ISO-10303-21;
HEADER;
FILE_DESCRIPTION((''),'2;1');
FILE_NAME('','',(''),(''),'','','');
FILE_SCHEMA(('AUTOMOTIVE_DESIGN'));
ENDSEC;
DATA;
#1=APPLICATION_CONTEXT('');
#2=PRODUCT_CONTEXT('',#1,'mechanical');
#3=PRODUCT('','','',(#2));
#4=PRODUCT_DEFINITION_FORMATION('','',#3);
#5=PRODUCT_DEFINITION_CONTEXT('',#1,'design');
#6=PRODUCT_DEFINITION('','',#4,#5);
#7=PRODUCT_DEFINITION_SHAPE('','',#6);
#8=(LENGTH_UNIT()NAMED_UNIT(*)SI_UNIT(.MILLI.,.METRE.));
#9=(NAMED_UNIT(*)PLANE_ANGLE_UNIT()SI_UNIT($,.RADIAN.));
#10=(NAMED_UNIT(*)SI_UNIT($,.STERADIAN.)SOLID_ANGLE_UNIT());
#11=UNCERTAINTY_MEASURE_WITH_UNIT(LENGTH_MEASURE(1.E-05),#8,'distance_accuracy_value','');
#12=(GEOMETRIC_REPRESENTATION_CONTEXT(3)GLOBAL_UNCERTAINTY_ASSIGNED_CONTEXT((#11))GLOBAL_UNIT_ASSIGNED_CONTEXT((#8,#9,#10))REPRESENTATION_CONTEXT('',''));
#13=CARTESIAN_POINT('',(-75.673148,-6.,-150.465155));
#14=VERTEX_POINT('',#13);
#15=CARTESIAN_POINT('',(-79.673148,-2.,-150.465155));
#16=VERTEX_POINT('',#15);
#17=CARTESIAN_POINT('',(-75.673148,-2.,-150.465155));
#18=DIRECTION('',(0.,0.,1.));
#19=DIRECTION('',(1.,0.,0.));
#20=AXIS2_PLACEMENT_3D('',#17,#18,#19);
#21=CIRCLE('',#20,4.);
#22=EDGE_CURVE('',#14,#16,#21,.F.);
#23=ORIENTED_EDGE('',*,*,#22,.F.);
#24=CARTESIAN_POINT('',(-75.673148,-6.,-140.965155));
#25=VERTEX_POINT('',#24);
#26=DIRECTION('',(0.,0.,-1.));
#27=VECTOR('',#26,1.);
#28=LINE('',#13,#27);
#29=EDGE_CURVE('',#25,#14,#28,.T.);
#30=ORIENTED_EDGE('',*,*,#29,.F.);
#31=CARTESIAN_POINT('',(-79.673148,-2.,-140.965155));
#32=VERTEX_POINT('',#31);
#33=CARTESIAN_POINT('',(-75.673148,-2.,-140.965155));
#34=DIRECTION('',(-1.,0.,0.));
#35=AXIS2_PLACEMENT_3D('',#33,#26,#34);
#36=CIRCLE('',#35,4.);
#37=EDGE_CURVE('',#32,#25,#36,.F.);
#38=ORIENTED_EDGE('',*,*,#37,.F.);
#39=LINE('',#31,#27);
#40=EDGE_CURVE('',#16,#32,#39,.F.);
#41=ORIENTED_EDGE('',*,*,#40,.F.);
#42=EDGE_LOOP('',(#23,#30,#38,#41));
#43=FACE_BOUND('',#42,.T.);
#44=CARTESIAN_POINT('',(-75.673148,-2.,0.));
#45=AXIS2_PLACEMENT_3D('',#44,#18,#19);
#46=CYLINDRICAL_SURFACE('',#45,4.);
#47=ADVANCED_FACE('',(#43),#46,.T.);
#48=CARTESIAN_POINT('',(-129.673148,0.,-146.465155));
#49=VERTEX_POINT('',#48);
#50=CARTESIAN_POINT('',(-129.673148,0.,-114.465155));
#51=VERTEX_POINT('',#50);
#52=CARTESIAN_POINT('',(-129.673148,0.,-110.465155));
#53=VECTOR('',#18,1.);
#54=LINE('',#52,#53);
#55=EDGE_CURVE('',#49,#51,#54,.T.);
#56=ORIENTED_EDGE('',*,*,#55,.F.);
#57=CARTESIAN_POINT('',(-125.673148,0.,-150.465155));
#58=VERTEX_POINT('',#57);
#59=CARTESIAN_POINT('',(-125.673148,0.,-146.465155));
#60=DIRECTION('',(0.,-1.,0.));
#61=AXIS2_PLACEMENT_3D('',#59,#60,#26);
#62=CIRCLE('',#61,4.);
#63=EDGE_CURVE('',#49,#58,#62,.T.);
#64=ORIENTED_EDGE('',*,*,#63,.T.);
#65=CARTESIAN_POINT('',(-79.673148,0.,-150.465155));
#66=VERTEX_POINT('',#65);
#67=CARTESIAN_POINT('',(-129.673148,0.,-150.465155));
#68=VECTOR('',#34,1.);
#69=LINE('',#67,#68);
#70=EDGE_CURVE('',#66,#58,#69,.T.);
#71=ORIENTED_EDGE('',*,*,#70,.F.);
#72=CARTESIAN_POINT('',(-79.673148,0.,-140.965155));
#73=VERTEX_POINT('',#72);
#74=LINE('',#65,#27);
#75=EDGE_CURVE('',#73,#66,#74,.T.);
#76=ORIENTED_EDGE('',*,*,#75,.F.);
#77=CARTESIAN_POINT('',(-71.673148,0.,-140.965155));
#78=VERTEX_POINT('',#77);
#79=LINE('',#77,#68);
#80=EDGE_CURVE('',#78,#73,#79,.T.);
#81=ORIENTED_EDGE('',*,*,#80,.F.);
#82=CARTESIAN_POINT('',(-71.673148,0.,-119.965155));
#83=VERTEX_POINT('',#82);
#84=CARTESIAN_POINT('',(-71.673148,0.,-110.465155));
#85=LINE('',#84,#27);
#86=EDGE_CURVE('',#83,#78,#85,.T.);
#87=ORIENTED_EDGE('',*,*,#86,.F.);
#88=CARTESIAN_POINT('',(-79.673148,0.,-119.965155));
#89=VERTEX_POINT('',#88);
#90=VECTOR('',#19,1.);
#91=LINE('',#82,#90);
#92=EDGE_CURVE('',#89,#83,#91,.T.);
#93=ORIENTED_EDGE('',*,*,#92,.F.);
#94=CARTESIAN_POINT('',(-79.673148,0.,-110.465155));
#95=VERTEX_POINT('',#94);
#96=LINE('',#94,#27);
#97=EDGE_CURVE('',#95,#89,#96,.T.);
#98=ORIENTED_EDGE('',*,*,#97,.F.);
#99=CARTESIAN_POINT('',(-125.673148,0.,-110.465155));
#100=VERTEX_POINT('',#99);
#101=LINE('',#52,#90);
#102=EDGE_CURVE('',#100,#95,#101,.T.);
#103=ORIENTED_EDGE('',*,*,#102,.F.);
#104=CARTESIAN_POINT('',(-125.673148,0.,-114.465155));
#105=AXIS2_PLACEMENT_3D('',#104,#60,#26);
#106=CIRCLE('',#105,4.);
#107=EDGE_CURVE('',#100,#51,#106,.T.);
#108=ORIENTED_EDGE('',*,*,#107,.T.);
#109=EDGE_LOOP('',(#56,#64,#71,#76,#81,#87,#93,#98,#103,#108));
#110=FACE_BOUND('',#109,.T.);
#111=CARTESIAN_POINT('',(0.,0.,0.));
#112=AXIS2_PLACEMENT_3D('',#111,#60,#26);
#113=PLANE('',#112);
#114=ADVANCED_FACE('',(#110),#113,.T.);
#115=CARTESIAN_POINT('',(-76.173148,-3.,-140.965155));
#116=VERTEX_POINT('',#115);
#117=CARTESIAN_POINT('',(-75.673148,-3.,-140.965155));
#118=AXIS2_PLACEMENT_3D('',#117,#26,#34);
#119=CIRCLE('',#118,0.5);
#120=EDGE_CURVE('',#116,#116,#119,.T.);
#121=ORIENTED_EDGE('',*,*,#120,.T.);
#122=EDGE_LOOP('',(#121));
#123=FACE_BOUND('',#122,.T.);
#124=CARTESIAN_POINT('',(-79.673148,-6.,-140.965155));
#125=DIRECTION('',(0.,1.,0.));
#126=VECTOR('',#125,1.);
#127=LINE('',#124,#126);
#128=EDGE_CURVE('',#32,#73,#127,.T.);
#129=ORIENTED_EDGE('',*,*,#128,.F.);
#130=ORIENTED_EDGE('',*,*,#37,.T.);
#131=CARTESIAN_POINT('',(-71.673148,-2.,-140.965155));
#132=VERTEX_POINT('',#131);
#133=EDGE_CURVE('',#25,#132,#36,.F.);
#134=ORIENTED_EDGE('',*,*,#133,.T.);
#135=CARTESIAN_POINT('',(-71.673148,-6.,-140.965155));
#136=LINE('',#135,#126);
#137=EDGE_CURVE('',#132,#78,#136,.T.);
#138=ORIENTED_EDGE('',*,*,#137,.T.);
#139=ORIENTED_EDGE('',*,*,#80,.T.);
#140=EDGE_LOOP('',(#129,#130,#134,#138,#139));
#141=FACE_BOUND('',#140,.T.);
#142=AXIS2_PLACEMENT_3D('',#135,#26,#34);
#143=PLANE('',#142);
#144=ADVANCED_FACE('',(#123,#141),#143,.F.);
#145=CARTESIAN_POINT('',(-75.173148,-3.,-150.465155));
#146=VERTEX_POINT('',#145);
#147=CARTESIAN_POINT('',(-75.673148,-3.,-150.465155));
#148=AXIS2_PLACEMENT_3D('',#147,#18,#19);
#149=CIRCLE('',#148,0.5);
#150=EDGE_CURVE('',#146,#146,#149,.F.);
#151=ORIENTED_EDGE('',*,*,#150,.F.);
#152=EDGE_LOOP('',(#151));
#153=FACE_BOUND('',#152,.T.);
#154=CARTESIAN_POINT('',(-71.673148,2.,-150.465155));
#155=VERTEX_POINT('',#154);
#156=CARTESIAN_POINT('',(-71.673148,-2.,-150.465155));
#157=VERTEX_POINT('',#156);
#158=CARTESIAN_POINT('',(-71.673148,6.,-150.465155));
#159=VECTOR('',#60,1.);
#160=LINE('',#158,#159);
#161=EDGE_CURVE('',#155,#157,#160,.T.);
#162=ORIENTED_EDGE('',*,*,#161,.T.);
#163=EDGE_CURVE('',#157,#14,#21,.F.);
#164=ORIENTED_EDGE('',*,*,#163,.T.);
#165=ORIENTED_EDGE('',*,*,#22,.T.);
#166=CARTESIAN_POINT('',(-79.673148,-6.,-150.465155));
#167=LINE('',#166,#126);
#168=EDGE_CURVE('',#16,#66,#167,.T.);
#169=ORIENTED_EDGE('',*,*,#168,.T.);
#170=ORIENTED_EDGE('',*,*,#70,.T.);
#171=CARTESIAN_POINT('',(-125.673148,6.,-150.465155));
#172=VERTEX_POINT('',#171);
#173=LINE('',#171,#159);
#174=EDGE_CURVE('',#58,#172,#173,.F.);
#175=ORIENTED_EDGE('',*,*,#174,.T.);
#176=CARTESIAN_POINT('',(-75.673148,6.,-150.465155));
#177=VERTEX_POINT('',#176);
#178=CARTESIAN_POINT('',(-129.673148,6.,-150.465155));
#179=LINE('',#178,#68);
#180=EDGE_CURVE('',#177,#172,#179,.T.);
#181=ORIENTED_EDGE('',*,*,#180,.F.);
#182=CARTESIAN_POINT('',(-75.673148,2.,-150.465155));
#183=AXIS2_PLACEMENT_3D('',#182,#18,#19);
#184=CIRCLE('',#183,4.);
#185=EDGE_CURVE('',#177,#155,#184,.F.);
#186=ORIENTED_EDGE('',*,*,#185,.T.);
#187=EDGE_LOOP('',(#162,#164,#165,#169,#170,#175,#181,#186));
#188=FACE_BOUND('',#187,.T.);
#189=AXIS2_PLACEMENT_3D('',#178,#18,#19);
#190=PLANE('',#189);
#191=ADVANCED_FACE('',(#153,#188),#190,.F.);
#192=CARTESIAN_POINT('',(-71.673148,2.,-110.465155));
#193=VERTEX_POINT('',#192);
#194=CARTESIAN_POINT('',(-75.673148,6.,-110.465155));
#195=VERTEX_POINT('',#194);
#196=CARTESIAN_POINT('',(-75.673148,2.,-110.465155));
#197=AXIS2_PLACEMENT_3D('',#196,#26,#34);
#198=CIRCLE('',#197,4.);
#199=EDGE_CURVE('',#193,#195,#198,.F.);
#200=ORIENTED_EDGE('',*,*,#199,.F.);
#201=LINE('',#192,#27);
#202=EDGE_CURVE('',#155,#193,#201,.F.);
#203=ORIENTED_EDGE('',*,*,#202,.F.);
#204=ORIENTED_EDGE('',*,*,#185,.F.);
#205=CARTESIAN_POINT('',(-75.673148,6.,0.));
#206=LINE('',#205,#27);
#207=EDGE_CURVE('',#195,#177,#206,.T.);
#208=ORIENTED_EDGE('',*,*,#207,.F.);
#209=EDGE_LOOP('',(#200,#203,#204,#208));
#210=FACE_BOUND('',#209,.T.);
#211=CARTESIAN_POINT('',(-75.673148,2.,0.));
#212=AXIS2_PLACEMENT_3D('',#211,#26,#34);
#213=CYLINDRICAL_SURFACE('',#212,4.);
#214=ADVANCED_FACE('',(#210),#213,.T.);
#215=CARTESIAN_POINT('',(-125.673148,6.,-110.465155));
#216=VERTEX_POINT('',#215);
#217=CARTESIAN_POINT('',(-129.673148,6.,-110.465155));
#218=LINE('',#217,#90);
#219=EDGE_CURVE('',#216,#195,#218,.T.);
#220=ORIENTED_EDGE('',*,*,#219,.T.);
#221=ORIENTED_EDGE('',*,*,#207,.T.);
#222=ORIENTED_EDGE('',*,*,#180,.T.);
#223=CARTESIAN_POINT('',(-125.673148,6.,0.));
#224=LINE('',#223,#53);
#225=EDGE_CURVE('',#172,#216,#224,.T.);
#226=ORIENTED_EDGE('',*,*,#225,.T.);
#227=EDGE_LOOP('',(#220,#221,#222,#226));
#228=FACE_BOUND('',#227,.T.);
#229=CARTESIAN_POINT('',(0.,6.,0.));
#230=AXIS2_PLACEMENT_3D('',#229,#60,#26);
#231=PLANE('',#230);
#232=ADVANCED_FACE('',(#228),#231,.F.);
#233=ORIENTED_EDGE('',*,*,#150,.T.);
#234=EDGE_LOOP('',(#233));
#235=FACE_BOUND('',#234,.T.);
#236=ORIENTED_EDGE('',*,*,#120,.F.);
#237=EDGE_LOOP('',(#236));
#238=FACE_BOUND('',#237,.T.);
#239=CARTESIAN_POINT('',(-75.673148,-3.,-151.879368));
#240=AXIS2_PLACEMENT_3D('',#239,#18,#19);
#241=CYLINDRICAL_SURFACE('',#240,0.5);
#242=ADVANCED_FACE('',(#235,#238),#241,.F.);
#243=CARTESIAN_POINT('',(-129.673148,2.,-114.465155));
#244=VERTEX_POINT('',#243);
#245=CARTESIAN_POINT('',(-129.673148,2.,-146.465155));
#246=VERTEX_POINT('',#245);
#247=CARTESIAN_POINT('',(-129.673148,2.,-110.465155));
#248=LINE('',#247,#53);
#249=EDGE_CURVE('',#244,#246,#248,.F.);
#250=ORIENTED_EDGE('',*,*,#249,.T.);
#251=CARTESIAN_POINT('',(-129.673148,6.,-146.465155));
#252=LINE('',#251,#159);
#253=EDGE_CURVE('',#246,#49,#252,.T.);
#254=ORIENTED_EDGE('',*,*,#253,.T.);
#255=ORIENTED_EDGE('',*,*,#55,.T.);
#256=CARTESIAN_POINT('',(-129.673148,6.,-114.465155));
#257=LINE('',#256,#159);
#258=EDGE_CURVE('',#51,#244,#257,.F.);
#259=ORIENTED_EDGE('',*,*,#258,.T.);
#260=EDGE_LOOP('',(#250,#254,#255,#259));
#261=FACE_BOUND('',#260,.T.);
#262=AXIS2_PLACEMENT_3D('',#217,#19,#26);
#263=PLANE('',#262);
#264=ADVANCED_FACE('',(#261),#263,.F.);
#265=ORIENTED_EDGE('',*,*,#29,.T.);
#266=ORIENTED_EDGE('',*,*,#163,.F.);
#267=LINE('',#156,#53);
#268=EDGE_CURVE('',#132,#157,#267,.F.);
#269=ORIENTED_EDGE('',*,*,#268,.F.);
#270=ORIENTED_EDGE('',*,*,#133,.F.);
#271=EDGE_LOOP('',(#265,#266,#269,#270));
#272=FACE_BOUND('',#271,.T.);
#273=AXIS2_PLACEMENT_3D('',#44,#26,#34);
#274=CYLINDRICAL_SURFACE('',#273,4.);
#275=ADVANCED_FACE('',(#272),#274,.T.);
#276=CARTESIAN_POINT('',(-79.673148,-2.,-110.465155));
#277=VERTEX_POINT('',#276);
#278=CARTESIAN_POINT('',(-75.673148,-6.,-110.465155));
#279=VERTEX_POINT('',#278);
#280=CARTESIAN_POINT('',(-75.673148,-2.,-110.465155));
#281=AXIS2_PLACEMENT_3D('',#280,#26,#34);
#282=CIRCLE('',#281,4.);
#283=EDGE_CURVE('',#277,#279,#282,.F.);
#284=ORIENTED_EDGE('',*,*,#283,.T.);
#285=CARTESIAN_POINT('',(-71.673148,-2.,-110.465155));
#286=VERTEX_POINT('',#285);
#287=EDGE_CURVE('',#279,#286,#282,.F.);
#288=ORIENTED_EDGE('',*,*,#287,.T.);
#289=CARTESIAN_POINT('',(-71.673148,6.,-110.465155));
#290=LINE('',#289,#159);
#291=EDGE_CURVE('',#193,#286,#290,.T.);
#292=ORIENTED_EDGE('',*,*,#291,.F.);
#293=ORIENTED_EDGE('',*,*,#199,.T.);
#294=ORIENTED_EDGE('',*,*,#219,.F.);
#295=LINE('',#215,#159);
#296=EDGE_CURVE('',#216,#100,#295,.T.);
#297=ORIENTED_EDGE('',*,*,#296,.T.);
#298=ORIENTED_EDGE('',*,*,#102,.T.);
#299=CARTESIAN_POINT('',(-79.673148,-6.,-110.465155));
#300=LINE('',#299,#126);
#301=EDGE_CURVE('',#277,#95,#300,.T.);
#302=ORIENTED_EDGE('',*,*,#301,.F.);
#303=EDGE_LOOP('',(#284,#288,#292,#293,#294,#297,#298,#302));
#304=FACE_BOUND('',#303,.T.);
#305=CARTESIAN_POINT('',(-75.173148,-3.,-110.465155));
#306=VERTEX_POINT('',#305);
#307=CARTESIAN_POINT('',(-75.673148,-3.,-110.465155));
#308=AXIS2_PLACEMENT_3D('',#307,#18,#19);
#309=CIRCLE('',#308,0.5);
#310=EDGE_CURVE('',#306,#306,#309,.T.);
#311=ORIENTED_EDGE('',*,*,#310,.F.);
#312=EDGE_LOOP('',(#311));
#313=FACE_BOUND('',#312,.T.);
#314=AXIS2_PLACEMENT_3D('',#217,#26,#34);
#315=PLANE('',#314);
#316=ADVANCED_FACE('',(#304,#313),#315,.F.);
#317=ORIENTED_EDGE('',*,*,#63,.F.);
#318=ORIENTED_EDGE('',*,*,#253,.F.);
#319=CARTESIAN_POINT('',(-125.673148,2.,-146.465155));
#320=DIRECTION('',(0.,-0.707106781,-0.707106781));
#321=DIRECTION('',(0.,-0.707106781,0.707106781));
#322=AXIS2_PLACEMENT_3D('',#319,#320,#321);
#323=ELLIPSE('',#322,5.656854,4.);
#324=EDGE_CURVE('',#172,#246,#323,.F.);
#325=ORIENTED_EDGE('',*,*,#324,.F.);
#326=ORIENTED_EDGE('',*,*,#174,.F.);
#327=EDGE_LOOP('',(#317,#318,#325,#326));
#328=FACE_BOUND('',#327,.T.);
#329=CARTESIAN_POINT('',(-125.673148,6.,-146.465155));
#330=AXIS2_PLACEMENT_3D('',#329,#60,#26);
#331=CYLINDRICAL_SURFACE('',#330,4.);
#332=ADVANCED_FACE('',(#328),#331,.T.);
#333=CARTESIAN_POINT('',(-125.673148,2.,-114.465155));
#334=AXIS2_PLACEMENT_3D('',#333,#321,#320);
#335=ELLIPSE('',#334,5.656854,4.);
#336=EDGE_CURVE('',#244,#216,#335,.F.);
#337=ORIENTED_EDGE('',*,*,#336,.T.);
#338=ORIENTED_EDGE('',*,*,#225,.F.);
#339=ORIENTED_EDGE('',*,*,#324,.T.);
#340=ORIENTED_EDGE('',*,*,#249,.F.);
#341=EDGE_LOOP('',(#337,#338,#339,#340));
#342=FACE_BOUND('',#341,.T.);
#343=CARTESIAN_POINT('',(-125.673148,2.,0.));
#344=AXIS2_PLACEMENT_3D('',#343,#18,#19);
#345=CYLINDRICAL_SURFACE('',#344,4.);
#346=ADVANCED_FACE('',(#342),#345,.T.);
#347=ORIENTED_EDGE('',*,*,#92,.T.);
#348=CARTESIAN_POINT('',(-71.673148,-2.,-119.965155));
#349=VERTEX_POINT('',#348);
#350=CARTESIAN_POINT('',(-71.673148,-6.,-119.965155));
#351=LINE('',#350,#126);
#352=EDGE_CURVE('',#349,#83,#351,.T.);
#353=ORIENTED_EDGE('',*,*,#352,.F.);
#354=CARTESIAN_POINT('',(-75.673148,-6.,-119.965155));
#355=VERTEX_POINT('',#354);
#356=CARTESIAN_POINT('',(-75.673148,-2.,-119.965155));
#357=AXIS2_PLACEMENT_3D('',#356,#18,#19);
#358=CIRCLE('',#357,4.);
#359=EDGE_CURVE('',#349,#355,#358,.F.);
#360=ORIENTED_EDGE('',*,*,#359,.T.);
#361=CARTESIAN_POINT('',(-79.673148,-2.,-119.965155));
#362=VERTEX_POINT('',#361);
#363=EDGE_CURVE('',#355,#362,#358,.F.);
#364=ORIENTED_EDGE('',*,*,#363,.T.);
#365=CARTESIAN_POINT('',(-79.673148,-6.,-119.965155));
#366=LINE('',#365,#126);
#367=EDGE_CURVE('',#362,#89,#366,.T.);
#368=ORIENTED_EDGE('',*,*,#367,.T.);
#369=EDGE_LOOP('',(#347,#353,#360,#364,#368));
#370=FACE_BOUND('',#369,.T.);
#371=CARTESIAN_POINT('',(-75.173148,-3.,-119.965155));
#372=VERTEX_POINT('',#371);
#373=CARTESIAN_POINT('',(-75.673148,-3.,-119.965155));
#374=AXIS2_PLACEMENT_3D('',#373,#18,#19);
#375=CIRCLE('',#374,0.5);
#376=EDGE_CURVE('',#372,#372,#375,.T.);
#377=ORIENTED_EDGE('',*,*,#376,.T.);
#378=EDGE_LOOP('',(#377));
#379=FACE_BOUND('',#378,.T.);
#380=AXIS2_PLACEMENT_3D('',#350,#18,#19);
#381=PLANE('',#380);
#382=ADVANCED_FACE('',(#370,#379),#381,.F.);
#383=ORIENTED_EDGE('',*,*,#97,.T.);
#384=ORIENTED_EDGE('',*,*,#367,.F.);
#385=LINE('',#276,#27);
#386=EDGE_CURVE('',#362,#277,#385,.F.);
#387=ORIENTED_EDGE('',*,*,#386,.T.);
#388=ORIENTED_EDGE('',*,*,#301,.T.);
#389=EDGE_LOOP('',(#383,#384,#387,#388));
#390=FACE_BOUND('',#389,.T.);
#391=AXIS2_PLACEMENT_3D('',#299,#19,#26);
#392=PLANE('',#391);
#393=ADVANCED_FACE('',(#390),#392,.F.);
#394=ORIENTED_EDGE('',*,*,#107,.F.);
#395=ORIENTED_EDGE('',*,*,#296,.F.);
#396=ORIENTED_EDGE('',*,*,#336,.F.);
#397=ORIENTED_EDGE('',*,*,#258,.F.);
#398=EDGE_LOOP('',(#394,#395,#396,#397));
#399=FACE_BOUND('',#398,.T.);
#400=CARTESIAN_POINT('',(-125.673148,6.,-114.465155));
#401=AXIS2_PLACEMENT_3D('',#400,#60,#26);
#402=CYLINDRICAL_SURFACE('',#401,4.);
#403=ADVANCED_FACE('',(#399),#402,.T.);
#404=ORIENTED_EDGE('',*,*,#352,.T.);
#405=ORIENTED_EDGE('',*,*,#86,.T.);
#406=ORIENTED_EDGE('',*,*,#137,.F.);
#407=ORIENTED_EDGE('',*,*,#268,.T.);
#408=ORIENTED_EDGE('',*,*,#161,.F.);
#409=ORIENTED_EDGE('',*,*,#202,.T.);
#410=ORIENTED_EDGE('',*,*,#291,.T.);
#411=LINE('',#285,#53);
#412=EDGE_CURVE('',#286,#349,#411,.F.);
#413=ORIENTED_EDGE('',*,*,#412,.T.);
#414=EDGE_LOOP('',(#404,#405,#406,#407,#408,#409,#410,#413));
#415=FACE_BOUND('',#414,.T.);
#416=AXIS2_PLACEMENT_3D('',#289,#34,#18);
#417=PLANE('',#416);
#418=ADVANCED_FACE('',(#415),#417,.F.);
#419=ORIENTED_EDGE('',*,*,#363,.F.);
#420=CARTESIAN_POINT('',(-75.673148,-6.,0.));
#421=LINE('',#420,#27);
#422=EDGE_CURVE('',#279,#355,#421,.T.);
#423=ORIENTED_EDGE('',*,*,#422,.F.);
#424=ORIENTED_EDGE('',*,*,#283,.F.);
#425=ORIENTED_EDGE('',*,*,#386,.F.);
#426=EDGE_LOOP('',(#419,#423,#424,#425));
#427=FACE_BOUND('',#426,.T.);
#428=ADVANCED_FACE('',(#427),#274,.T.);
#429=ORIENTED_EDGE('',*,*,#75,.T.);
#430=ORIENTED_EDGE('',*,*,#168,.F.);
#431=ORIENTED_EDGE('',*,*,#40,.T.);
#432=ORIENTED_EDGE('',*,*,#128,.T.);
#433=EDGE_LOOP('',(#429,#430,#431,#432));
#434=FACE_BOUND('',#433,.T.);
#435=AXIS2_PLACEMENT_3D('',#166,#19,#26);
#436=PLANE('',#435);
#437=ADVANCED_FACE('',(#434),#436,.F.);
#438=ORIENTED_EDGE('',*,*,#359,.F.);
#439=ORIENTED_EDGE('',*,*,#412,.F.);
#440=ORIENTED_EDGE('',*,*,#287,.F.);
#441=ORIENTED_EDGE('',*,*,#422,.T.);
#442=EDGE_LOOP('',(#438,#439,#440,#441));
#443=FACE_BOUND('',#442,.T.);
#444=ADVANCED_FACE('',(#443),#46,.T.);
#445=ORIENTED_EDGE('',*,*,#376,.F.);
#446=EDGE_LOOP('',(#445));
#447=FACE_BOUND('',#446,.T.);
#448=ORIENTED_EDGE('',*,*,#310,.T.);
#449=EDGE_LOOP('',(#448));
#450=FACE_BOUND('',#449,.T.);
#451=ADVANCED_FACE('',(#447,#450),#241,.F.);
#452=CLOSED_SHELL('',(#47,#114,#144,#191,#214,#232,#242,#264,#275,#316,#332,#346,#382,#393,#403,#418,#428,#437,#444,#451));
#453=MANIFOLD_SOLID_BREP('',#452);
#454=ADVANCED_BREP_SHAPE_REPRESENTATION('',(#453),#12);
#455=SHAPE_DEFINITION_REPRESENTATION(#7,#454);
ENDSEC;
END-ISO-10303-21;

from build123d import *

# Parameters (mm, degrees)
SKETCH_5_W          = 58
SKETCH_5_H          = 40
EXTRUDE_3_DEPTH     = 6
SKETCH_6_W          = 8
SKETCH_6_H          = 9.5
EXTRUDE_4_DEPTH     = 6
CUT_EXTRUDE_2_REACH = 137.835
SKETCH_7_R          = 0.5
FILLET_4_R          = 4
FILLET_5_R          = 4


with BuildPart() as part:
    # Эскиз5 → Бобышка-Вытянуть3 (new body)
    with BuildSketch(Plane(origin=(0, 0, 0), x_dir=(1, 0, 0), z_dir=(0, 1, 0))):
        with Locations((-100.673147531, 130.465154765)):
            Rectangle(SKETCH_5_W, SKETCH_5_H)
    extrude(amount=EXTRUDE_3_DEPTH)

    # Эскиз6 → Бобышка-Вытянуть4 (add)
    with BuildSketch(Plane.XZ):
        with Locations((-75.673147531, -115.215154765)):
            Rectangle(SKETCH_6_W, SKETCH_6_H)
        with Locations((-75.673147531, -145.715154765)):
            Rectangle(SKETCH_6_W, SKETCH_6_H)
    extrude(amount=EXTRUDE_4_DEPTH)

    # Вырез-Вытянуть2: up to this face of the body (flat: up to its plane)
    cut_extrude_2_end = Plane(part.part.faces().sort_by_distance((-97.642844501, 2.272727273, -150.465154765))[0])
    # Эскиз7 → Вырез-Вытянуть2 (cut, up to the picked face)
    with BuildSketch(Plane.XY.offset(-110.465154765), mode=Mode.PRIVATE) as cut_extrude_2_sk1:
        with Locations((-75.673147531, -3)):
            Circle(SKETCH_7_R)
    cut_extrude_2_tool1 = split(extrude(cut_extrude_2_sk1.sketch, amount=-CUT_EXTRUDE_2_REACH, mode=Mode.PRIVATE), bisect_by=cut_extrude_2_end, keep=Keep.BOTH, mode=Mode.PRIVATE)
    add(cut_extrude_2_tool1.solids().sort_by(Axis((-75.673148, -3, -110.465155), (0, 0, -1)))[0], mode=Mode.SUBTRACT)

    # Скругление4
    fillet_4_edges = [part.edges().sort_by_distance(p)[0] for p in [
        (-71.673147531, 6, -130.465154765),
        (-71.673147531, -6, -145.715154765),
        (-79.673147531, -6, -145.715154765),
        (-71.673147531, -6, -115.215154765),
        (-79.673147531, -6, -115.215154765),
    ]]
    fillet(fillet_4_edges, radius=FILLET_4_R - 0.0001)  # a hair under: the kernel refuses the full size

    # Скругление5
    fillet_5_edges = [part.edges().sort_by_distance(p)[0] for p in [
        (-129.673147531, 6, -130.465154765),
        (-129.673147531, 3, -110.465154765),
        (-129.673147531, 3, -150.465154765),
    ]]
    fillet(fillet_5_edges, radius=FILLET_5_R)


solid = part.part
